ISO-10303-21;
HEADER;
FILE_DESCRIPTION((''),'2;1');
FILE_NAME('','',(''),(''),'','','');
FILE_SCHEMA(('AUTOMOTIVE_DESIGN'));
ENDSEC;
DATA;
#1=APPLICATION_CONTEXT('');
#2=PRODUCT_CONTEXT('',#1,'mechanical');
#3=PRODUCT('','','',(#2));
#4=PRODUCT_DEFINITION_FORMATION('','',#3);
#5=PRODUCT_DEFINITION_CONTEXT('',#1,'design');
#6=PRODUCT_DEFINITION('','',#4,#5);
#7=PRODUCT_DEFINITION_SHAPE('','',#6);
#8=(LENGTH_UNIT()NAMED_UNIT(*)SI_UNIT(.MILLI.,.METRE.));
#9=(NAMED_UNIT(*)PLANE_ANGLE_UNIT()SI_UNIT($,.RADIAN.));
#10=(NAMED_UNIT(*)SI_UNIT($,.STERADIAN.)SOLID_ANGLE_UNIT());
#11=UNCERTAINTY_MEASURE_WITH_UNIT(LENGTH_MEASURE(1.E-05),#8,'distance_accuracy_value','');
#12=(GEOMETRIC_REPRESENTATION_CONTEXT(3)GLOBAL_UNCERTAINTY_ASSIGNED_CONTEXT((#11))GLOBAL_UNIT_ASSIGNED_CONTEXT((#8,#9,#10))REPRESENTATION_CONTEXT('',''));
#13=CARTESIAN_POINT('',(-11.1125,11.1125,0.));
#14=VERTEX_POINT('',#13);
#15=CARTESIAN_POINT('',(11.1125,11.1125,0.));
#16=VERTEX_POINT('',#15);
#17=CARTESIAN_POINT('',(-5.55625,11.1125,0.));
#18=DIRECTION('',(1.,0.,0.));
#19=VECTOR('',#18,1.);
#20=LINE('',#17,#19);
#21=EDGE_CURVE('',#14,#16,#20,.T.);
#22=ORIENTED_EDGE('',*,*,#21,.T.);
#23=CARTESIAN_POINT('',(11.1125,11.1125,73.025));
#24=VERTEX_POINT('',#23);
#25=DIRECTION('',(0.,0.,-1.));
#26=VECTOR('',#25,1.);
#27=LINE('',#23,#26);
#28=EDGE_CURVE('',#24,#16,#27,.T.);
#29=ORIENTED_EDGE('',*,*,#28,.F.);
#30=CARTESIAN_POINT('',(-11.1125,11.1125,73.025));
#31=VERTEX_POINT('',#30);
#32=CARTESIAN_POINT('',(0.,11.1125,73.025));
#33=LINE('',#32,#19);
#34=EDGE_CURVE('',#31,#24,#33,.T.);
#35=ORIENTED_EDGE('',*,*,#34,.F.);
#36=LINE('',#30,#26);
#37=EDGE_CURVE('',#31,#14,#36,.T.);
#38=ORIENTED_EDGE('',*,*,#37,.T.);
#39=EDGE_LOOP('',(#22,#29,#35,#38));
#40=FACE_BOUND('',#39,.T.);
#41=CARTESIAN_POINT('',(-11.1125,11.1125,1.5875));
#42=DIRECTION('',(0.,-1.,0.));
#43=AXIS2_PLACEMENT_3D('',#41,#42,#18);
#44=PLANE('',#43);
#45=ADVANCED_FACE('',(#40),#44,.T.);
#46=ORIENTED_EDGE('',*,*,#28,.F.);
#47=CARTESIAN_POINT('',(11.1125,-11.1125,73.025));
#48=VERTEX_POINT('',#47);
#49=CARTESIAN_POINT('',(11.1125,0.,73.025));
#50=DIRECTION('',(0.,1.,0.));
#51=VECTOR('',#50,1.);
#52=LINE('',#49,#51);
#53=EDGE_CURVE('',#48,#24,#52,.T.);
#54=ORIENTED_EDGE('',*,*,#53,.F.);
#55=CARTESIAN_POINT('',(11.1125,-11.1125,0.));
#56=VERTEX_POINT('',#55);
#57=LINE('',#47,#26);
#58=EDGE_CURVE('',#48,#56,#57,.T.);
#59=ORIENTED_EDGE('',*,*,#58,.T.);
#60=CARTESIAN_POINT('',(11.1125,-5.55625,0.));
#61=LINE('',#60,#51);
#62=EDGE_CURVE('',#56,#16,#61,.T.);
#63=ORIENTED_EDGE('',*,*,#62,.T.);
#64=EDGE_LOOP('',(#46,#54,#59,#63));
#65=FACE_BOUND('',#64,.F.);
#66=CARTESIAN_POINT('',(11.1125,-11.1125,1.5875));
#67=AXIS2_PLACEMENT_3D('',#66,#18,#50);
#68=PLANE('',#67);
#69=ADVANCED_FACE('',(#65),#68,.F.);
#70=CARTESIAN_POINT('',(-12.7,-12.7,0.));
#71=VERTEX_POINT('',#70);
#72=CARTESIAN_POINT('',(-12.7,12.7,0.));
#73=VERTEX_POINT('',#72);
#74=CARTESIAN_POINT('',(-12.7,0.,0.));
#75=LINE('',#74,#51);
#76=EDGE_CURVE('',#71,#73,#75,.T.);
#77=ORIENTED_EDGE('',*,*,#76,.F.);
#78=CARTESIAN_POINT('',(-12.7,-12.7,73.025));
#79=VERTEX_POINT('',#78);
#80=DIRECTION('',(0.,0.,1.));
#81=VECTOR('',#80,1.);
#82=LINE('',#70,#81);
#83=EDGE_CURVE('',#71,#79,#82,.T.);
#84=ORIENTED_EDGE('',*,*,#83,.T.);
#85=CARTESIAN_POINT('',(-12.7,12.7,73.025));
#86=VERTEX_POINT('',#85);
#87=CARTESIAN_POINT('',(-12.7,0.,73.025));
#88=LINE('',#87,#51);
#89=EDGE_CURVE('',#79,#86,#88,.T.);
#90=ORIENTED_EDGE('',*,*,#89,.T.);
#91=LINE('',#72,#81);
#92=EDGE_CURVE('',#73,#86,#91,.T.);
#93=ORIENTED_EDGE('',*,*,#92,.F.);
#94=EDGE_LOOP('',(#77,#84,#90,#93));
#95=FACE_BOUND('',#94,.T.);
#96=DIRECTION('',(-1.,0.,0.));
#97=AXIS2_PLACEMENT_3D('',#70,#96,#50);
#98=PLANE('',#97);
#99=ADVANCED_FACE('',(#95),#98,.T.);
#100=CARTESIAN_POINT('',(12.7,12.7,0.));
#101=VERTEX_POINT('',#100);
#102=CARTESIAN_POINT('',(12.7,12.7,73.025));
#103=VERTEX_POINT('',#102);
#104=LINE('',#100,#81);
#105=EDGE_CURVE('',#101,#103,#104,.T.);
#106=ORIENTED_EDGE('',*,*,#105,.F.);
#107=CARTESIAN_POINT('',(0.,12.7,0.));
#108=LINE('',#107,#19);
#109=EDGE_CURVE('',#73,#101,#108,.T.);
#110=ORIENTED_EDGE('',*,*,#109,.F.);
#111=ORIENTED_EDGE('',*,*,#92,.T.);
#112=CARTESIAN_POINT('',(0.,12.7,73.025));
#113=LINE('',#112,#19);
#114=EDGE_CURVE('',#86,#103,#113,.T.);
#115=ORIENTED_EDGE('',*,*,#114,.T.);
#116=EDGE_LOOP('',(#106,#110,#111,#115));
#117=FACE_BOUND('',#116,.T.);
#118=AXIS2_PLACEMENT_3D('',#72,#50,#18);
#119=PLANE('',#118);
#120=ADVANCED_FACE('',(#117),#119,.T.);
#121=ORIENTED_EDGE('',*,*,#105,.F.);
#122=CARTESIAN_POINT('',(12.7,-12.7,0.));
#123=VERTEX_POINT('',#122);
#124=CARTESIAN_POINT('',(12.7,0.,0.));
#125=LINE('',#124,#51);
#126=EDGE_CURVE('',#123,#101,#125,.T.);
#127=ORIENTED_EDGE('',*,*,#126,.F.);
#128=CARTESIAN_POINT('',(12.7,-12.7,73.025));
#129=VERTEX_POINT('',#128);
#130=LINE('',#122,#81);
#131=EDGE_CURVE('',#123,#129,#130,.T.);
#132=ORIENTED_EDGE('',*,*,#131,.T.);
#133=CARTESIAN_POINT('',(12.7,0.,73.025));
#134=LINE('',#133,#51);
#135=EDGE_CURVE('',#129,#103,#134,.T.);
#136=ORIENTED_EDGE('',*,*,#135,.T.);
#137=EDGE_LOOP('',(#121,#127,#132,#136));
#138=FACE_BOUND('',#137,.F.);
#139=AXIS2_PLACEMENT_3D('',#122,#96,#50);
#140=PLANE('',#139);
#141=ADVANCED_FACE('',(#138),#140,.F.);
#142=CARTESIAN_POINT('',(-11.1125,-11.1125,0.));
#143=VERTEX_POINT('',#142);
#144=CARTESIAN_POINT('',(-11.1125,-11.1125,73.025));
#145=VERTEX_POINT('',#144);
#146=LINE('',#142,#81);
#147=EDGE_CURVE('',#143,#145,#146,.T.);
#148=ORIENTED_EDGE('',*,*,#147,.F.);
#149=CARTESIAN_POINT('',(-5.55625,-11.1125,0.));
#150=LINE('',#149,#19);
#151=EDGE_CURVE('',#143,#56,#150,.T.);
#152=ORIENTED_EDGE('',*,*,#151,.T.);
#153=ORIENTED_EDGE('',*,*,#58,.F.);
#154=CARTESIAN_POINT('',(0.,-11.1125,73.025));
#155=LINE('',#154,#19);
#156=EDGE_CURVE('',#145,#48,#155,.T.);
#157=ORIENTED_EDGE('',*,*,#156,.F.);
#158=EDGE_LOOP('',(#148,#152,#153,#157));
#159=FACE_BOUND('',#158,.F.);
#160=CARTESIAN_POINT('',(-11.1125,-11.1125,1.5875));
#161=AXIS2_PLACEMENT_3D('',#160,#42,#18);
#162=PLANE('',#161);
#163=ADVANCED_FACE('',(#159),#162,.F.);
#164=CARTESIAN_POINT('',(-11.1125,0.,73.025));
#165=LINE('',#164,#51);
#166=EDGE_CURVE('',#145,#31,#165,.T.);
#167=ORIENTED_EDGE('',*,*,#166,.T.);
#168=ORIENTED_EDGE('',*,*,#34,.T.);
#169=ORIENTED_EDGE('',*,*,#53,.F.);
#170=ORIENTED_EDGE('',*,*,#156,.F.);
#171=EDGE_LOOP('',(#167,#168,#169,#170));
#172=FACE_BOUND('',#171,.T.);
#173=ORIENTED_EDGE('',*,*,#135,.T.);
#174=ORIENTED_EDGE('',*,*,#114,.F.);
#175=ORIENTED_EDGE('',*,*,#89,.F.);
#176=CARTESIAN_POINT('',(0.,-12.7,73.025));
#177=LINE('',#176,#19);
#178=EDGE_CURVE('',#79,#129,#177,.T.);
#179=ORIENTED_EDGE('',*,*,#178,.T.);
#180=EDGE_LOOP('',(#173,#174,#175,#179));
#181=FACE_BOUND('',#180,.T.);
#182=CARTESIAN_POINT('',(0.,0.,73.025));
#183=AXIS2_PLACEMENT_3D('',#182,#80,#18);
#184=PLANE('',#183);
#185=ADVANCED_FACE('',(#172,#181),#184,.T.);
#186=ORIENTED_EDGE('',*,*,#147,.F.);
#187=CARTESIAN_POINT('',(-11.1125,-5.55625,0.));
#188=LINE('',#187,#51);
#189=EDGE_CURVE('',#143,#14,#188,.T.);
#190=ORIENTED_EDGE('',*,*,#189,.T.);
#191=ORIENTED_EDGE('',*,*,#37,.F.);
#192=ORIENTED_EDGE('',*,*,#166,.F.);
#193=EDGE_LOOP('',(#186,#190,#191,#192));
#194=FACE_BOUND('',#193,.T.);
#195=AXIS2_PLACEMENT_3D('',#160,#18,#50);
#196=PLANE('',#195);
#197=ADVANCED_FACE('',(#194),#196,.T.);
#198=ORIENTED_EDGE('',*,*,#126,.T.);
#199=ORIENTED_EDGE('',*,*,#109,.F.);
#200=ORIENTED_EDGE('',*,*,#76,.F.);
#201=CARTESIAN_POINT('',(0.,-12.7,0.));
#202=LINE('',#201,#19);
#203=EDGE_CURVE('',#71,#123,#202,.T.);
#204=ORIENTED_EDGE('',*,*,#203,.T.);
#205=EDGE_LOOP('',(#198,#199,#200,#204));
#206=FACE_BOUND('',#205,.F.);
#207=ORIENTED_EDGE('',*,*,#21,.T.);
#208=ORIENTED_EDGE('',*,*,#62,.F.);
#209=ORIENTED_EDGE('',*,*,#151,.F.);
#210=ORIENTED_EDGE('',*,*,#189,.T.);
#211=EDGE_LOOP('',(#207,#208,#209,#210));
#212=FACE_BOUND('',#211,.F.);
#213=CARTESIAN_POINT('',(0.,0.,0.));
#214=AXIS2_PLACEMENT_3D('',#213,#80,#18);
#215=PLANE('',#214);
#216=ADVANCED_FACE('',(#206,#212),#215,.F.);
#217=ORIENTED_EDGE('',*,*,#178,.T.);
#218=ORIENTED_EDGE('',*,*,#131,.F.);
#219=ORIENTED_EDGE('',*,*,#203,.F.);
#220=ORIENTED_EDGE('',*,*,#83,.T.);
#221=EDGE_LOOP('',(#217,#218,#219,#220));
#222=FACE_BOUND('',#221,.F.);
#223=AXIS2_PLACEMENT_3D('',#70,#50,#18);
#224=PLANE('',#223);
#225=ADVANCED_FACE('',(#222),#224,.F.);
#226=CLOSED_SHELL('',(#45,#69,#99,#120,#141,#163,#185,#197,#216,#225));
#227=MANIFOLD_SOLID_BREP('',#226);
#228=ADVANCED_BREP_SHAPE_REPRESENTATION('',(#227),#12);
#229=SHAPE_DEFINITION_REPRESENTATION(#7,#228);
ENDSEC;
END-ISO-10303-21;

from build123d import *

# Parameters (mm, degrees)
F1_W     = 25.4
F1_H     = 25.4
F2_DEPTH = 73.025
F3_T     = -1.5875
F4_DEPTH = 1.5885


# Not quite as in the source:
# - a variable given as a bare number and used for a length is read in inches; the dataset says mm whatever the document's units were


with BuildPart() as f2:
    # F1 (on Top) → F2 (new body)
    with BuildSketch(Plane.XY):
        Rectangle(F1_W, F1_H)
    extrude(amount=F2_DEPTH)

    # F3
    f3_openings = [f2.faces().sort_by_distance(p)[0] for p in [
        (0, 0, 73.025),
    ]]
    offset(amount=F3_T, openings=f3_openings)

    # F4 (cut, through all): a face of the model
    f4_faces = [f2.faces().sort_by_distance(p)[0] for p in [
        (0, 0, 1.5875),
    ]]
    extrude(f4_faces, amount=-F4_DEPTH, mode=Mode.SUBTRACT)


solid = f2.part
